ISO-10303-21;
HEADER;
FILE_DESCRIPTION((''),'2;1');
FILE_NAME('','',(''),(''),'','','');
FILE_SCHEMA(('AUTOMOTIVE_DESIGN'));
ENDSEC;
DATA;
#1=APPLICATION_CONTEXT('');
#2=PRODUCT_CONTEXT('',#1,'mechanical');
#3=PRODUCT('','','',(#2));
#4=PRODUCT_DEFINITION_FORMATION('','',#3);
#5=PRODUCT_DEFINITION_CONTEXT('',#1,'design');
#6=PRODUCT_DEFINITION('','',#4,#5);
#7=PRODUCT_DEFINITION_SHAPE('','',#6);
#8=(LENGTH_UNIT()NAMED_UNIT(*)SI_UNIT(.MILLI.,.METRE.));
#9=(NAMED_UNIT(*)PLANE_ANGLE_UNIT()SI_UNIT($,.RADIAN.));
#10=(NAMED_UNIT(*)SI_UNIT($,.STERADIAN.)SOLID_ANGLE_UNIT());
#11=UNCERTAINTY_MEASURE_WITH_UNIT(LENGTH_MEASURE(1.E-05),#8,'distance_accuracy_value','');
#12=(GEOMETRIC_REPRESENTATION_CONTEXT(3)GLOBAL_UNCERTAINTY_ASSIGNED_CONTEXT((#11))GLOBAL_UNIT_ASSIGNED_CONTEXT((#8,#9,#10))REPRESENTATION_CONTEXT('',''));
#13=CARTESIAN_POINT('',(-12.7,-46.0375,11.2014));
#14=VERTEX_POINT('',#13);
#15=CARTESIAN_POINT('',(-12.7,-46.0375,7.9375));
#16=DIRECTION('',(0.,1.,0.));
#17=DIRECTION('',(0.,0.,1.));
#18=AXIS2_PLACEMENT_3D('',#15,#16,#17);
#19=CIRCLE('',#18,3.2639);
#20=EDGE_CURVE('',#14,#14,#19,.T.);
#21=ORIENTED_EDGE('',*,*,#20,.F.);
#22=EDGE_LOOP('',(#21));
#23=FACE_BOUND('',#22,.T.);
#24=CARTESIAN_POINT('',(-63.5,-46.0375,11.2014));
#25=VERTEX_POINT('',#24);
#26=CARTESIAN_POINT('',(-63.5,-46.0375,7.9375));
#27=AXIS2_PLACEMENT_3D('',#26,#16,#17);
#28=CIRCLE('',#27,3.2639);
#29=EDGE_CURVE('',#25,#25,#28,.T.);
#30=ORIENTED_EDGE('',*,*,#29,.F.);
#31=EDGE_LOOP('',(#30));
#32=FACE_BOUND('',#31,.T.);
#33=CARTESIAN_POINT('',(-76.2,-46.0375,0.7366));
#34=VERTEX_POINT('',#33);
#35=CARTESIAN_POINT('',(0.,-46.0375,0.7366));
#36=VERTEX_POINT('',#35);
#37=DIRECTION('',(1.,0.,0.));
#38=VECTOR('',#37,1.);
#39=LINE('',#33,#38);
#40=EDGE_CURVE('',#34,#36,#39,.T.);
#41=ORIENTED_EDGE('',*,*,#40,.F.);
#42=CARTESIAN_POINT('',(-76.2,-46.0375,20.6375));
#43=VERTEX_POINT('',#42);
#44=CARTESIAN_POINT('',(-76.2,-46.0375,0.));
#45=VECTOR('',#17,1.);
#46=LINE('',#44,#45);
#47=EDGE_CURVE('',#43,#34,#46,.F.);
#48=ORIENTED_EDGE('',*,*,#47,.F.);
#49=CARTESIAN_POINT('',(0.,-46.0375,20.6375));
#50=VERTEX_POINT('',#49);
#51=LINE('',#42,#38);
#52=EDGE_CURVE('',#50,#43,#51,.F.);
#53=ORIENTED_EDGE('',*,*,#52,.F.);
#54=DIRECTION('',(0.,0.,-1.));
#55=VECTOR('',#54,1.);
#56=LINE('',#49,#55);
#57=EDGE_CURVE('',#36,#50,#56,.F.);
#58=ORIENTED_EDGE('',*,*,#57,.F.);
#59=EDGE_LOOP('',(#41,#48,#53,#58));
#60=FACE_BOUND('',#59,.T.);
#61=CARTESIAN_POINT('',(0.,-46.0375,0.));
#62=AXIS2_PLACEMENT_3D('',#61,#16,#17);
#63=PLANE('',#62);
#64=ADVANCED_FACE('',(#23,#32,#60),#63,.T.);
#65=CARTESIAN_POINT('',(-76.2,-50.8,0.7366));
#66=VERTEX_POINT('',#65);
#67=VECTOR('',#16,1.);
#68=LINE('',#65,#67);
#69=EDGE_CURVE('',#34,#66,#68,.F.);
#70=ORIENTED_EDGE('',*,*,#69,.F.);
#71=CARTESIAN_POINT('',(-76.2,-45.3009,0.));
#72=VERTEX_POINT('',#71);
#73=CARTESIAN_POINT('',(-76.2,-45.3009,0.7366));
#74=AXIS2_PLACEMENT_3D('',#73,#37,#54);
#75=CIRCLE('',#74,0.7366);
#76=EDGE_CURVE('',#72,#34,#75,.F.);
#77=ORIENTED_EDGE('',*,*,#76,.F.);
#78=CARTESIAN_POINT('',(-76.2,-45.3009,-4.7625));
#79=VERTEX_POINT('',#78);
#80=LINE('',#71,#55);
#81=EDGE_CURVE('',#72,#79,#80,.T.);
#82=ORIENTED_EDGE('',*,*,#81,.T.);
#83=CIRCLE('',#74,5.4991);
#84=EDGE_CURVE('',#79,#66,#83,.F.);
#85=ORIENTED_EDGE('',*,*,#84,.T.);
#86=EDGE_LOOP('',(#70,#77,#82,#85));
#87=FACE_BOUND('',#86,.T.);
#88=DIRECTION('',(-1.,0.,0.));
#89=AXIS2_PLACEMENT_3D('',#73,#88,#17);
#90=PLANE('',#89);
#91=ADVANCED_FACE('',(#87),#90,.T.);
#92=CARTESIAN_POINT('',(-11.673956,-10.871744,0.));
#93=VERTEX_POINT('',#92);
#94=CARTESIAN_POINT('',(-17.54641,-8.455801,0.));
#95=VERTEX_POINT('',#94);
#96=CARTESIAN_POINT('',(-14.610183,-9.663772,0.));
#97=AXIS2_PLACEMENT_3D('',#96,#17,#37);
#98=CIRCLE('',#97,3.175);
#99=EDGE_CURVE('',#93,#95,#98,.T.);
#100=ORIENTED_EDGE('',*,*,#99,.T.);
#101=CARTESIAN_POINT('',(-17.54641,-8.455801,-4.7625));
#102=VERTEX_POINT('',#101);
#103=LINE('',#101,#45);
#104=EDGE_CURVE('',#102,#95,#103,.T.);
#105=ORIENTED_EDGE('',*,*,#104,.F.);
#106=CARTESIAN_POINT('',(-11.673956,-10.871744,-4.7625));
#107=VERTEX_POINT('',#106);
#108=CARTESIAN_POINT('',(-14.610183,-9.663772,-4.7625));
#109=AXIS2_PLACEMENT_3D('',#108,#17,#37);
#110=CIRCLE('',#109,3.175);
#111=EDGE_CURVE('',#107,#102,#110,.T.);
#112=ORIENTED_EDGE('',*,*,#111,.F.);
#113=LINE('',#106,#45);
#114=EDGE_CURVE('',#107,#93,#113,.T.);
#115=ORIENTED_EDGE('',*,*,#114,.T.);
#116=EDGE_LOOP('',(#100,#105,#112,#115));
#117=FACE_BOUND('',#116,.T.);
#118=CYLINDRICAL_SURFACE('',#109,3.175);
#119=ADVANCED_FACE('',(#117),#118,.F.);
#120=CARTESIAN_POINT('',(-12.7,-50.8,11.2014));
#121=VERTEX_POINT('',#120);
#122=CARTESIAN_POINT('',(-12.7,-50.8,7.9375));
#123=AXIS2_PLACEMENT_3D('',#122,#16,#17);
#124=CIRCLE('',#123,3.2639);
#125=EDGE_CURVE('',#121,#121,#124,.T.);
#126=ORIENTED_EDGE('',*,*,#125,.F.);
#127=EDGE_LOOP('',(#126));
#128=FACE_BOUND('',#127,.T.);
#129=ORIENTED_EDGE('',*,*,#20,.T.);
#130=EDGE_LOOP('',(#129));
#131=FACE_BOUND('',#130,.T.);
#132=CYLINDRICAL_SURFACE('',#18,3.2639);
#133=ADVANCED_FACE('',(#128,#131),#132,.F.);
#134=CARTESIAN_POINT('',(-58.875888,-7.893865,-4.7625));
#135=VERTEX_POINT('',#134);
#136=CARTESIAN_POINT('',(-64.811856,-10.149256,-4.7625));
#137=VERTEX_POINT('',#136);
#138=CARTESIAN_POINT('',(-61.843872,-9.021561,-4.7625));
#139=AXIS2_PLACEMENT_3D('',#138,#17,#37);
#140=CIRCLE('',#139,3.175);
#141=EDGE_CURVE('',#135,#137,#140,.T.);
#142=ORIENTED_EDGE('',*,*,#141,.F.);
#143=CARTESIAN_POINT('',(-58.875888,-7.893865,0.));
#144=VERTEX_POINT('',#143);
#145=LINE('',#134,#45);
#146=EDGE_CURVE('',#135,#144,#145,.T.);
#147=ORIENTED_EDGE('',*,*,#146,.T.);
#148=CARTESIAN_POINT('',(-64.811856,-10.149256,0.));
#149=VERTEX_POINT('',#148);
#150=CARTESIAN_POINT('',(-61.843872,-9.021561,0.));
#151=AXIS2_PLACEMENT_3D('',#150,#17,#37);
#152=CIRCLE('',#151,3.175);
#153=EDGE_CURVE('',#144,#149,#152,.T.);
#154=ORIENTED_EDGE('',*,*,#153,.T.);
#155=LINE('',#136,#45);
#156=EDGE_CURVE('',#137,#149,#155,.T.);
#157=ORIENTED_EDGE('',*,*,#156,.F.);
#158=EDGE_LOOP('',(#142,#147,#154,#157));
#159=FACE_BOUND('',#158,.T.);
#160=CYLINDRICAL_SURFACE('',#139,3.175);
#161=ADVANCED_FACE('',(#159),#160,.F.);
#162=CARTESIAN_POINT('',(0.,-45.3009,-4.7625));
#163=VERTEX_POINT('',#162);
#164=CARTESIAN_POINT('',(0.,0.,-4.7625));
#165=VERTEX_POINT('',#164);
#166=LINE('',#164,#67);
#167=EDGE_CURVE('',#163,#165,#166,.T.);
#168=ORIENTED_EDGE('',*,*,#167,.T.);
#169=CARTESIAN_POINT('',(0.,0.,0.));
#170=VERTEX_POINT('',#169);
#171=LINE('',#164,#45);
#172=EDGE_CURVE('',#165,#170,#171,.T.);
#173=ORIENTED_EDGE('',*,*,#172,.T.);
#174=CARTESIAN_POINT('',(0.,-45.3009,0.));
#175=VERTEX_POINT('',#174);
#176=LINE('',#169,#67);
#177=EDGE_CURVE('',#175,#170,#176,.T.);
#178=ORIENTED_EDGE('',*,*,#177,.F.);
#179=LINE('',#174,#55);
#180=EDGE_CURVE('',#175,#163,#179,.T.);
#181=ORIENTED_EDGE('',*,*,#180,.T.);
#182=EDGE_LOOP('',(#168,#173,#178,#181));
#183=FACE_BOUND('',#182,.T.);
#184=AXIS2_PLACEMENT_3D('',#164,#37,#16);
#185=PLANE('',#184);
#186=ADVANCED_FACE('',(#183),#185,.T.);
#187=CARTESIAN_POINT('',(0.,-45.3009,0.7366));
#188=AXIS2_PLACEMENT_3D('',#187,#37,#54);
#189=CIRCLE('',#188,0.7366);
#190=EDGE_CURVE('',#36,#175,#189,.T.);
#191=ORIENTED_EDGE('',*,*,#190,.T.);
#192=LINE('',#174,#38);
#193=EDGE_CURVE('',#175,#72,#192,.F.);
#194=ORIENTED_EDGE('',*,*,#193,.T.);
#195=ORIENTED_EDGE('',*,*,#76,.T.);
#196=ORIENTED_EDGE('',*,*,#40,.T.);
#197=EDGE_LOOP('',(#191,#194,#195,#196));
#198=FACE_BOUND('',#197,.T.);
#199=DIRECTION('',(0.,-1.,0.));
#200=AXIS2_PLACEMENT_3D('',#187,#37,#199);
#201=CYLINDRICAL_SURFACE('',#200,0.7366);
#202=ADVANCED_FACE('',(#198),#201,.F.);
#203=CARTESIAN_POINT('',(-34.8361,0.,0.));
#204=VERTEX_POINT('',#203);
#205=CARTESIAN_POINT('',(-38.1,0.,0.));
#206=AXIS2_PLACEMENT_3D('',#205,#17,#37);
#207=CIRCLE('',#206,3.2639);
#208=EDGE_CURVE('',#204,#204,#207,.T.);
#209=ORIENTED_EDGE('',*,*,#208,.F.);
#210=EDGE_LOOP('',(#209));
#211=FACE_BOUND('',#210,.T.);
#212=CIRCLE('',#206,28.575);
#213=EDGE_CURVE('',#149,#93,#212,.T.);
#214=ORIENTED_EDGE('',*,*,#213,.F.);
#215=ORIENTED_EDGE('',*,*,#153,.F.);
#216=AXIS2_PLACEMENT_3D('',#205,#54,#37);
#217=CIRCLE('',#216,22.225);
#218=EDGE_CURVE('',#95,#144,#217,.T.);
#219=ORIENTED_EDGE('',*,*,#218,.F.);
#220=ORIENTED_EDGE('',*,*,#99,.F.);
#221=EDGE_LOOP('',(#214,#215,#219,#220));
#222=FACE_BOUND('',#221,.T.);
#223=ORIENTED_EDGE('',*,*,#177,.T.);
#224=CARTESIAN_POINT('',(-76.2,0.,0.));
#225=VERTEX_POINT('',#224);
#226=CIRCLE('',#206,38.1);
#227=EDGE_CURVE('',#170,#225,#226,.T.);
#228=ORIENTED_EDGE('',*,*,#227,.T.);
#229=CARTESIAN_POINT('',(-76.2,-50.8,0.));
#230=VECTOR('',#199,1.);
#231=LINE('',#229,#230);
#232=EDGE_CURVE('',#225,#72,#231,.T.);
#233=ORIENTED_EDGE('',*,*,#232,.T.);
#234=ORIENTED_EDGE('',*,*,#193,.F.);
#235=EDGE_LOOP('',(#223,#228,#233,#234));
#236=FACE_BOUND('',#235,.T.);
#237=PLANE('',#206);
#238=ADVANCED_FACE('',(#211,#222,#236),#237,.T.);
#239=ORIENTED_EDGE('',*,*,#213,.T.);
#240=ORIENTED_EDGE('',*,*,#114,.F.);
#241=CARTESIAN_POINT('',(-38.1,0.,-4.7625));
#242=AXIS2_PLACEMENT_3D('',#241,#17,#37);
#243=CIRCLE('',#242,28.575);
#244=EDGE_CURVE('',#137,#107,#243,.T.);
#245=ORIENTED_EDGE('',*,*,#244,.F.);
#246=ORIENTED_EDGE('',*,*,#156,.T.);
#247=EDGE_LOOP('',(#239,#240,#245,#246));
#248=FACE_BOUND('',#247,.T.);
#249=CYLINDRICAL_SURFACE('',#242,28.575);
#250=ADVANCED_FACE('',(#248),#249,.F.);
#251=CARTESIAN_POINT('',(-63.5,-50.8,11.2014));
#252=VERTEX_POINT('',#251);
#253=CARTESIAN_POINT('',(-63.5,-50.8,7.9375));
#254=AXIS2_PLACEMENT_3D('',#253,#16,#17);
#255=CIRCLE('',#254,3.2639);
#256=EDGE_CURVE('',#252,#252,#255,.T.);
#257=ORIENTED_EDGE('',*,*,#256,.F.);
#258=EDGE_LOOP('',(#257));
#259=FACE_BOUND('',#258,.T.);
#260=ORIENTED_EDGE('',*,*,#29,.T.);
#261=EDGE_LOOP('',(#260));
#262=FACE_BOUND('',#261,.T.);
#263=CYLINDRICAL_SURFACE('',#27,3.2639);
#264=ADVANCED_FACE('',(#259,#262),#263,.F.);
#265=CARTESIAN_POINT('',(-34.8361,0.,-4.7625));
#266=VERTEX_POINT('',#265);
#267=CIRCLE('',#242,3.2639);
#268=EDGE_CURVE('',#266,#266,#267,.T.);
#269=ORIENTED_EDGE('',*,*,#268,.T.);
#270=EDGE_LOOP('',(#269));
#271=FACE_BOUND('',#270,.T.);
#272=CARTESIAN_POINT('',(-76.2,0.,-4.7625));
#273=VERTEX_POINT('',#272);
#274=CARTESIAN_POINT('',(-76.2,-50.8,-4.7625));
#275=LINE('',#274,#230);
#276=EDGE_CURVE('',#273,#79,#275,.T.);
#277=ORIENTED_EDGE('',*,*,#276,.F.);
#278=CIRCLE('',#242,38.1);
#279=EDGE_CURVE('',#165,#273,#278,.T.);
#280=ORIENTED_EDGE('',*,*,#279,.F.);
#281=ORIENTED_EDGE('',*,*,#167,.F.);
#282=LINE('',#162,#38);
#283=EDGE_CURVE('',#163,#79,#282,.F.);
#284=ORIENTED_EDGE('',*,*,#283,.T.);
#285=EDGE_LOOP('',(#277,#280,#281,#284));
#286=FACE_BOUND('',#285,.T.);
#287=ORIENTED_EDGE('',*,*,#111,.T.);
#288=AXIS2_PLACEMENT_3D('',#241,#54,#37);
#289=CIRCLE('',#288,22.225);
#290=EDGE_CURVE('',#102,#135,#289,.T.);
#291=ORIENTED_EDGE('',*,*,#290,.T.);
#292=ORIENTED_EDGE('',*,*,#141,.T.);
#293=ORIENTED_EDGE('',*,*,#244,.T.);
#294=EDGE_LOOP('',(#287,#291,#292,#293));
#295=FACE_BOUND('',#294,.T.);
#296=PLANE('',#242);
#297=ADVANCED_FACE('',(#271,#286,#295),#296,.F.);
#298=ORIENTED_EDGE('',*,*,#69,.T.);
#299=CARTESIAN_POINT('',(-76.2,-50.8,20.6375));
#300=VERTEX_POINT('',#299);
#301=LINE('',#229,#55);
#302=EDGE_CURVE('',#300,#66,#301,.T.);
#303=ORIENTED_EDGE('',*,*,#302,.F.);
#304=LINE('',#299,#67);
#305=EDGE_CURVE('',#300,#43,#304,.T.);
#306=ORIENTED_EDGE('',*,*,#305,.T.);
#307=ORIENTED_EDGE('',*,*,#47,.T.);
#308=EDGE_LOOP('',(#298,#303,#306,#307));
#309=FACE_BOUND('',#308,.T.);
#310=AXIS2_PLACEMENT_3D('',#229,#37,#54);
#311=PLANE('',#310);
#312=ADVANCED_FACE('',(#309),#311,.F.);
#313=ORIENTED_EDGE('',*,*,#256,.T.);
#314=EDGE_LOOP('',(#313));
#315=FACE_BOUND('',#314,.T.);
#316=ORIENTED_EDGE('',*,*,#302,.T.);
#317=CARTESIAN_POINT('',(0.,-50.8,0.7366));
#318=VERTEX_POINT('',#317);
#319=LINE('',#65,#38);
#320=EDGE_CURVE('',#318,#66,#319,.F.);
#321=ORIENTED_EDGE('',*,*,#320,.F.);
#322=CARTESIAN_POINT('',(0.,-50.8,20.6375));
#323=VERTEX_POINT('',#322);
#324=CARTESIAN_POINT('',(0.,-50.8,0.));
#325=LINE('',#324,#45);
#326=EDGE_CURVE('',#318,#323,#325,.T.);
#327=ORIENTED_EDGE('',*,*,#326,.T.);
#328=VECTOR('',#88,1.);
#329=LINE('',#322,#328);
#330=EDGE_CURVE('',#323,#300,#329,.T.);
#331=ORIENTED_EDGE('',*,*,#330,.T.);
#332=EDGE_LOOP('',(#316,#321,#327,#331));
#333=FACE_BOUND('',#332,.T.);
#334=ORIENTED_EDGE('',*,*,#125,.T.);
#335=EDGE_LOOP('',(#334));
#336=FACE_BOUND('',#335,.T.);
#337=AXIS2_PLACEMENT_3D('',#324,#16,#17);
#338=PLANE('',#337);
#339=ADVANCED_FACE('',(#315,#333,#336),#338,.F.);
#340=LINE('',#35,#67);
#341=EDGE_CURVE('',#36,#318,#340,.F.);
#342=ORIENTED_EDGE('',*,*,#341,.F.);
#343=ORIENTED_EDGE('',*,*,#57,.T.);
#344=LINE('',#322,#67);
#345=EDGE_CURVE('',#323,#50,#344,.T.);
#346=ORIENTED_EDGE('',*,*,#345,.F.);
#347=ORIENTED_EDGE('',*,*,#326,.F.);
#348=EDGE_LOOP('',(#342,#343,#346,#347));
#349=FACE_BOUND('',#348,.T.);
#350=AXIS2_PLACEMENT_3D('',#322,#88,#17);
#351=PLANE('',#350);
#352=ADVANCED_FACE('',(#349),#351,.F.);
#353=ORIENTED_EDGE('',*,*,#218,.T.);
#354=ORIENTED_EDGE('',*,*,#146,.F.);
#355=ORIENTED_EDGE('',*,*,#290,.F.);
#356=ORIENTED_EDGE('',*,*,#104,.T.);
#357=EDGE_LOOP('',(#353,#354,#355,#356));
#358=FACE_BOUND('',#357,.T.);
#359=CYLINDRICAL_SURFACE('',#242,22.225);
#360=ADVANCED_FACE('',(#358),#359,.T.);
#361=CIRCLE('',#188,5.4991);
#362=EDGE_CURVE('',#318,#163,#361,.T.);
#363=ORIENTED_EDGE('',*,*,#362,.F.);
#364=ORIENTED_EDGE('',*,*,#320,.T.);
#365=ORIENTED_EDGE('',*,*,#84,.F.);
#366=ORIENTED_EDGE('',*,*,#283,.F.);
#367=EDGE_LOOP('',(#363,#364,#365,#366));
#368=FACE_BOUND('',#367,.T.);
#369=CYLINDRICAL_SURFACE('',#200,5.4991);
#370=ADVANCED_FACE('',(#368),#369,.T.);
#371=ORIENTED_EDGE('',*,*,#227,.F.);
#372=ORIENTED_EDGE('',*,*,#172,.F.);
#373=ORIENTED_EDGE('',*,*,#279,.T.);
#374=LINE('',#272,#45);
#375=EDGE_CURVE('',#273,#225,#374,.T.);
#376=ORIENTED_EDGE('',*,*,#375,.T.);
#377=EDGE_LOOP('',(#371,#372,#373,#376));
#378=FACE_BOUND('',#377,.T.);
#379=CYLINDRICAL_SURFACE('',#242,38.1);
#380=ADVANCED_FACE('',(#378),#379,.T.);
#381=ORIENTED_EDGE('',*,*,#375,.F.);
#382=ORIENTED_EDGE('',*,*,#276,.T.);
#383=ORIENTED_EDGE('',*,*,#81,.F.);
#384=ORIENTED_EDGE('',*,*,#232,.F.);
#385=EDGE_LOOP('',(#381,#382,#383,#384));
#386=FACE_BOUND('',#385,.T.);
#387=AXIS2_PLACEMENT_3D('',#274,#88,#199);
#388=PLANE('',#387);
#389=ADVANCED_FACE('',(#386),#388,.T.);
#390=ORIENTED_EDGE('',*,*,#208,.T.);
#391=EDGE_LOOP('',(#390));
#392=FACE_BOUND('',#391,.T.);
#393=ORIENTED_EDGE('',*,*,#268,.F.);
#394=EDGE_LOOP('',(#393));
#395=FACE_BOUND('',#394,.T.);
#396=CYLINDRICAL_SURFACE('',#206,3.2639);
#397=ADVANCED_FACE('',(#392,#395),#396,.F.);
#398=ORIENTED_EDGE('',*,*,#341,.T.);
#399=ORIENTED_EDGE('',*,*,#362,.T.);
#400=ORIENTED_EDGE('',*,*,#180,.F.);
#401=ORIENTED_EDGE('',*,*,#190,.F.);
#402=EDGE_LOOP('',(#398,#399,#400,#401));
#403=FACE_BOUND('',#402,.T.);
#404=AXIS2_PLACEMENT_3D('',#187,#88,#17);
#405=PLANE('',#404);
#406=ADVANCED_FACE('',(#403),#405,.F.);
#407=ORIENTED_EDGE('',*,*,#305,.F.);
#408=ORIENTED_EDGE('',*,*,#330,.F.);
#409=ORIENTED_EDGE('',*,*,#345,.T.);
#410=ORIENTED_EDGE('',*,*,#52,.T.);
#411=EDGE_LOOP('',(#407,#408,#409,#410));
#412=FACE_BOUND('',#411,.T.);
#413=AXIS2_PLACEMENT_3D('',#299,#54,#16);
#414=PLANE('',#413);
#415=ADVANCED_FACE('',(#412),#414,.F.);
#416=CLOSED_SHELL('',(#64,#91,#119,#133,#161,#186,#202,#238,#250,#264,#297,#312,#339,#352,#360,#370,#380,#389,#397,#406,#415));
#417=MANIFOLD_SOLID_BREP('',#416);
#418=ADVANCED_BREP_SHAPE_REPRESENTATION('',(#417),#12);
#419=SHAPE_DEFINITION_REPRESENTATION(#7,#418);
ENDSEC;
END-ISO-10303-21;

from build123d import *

# Parameters (mm, degrees)
BASE_FLANGE1_DEPTH                = 4.7625
EDGE_FLANGE2_STRIP_W              = 20.5232
EDGE_FLANGE2_STRIP_H              = 4.7625
EDGE_FLANGE2_STRIP_CUT_DEPTH      = 76.2
EDGE_FLANGE2_DEPTH                = 76.2
F_1_4_START                       = -50.8
F_1_4_CLEARANCE_HOLE3_OUTLINE_R   = 3.2639
F_1_4_CLEARANCE_HOLE3_DEPTH       = 4.7625
F_1_4_START_2                     = -4.7625
F_1_4_CLEARANCE_HOLE3_2_OUTLINE_R = 3.2639
F_1_4_CLEARANCE_HOLE3_2_DEPTH     = 4.7625
CUT_EXTRUDE1_DEPTH                = 94.877507457


# Read off the part's stored shape, not the designer's step: 1/4 Clearance Hole3
# Sheet-metal steps are written as plain solids
with BuildPart() as part:
    # Sketch1 → Base-Flange1 (new body)
    with BuildSketch(Plane.XY):
        with BuildLine():
            Line((0, 0), (0, -50.8))
            Line((0, -50.8), (-76.2, -50.8))
            Line((-76.2, -50.8), (-76.2, 0))
            ThreePointArc((-76.2, 0), (-38.1, 38.1), (0, 0))
        make_face()
    extrude(amount=-BASE_FLANGE1_DEPTH)

    # Edge-Flange2 strip (across the edge) → Edge-Flange2 strip cut (cut)
    with BuildSketch(Plane(origin=(-76.2, -50.8, 0), x_dir=(0, 1, 0), z_dir=(1, 0, 0))):
        with Locations((-4.7625, -2.38125)):
            Rectangle(EDGE_FLANGE2_STRIP_W, EDGE_FLANGE2_STRIP_H)
    extrude(amount=EDGE_FLANGE2_STRIP_CUT_DEPTH, mode=Mode.SUBTRACT)

    # Edge-Flange2 section (across the edge) → Edge-Flange2 (add)
    with BuildSketch(Plane(origin=(-76.2, -50.8, 0), x_dir=(0, 1, 0), z_dir=(1, 0, 0))):
        with BuildLine():
            Line((0, 0.7366), (0, 20.6375))
            Line((0, 20.6375), (4.7625, 20.6375))
            Line((4.7625, 20.6375), (4.7625, 0.7366))
            ThreePointArc((4.7625, 0.7366), (4.978245145, 0.215745145), (5.4991, 0))
            Line((5.4991, 0), (5.4991, -4.7625))
            ThreePointArc((5.4991, -4.7625), (1.6106491, -3.1518509), (0, 0.7366))
        make_face()
    extrude(amount=EDGE_FLANGE2_DEPTH)

    # 1/4 Clearance Hole3 outline → 1/4 Clearance Hole3 (cut)
    with BuildSketch(Plane(origin=(0, 0, 0), x_dir=(1, 0, 0), z_dir=(0, 1, 0)).offset(F_1_4_START)):
        with Locations((-12.7, -7.9375)):
            Circle(F_1_4_CLEARANCE_HOLE3_OUTLINE_R)
        with Locations((-63.5, -7.9375)):
            Circle(F_1_4_CLEARANCE_HOLE3_OUTLINE_R)
    extrude(amount=F_1_4_CLEARANCE_HOLE3_DEPTH, mode=Mode.SUBTRACT)

    # 1_4 Clearance Hole3 2 outline → 1_4 Clearance Hole3 2 (cut)
    with BuildSketch(Plane.XY.offset(F_1_4_START_2)):
        with Locations((-38.1, 0)):
            Circle(F_1_4_CLEARANCE_HOLE3_2_OUTLINE_R)
    extrude(amount=F_1_4_CLEARANCE_HOLE3_2_DEPTH, mode=Mode.SUBTRACT)

    # Sketch25 → Cut-Extrude1 (cut, through all)
    with BuildSketch(Plane.XY):
        with BuildLine():
            ThreePointArc((-64.811855715, -10.149255602), (-38.48848332, -28.57235912), (-11.673955742, -10.871743644))
            ThreePointArc((-11.673955742, -10.871743644), (-13.402211365, -6.727544988), (-17.546410021, -8.455800612))
            ThreePointArc((-17.546410021, -8.455800612), (-38.402153693, -22.222945983), (-58.875887778, -7.893865468))
            ThreePointArc((-58.875887778, -7.893865468), (-62.971566813, -6.053576567), (-64.811855715, -10.149255602))
        make_face()
    extrude(amount=-CUT_EXTRUDE1_DEPTH, mode=Mode.SUBTRACT)


solid = part.part
